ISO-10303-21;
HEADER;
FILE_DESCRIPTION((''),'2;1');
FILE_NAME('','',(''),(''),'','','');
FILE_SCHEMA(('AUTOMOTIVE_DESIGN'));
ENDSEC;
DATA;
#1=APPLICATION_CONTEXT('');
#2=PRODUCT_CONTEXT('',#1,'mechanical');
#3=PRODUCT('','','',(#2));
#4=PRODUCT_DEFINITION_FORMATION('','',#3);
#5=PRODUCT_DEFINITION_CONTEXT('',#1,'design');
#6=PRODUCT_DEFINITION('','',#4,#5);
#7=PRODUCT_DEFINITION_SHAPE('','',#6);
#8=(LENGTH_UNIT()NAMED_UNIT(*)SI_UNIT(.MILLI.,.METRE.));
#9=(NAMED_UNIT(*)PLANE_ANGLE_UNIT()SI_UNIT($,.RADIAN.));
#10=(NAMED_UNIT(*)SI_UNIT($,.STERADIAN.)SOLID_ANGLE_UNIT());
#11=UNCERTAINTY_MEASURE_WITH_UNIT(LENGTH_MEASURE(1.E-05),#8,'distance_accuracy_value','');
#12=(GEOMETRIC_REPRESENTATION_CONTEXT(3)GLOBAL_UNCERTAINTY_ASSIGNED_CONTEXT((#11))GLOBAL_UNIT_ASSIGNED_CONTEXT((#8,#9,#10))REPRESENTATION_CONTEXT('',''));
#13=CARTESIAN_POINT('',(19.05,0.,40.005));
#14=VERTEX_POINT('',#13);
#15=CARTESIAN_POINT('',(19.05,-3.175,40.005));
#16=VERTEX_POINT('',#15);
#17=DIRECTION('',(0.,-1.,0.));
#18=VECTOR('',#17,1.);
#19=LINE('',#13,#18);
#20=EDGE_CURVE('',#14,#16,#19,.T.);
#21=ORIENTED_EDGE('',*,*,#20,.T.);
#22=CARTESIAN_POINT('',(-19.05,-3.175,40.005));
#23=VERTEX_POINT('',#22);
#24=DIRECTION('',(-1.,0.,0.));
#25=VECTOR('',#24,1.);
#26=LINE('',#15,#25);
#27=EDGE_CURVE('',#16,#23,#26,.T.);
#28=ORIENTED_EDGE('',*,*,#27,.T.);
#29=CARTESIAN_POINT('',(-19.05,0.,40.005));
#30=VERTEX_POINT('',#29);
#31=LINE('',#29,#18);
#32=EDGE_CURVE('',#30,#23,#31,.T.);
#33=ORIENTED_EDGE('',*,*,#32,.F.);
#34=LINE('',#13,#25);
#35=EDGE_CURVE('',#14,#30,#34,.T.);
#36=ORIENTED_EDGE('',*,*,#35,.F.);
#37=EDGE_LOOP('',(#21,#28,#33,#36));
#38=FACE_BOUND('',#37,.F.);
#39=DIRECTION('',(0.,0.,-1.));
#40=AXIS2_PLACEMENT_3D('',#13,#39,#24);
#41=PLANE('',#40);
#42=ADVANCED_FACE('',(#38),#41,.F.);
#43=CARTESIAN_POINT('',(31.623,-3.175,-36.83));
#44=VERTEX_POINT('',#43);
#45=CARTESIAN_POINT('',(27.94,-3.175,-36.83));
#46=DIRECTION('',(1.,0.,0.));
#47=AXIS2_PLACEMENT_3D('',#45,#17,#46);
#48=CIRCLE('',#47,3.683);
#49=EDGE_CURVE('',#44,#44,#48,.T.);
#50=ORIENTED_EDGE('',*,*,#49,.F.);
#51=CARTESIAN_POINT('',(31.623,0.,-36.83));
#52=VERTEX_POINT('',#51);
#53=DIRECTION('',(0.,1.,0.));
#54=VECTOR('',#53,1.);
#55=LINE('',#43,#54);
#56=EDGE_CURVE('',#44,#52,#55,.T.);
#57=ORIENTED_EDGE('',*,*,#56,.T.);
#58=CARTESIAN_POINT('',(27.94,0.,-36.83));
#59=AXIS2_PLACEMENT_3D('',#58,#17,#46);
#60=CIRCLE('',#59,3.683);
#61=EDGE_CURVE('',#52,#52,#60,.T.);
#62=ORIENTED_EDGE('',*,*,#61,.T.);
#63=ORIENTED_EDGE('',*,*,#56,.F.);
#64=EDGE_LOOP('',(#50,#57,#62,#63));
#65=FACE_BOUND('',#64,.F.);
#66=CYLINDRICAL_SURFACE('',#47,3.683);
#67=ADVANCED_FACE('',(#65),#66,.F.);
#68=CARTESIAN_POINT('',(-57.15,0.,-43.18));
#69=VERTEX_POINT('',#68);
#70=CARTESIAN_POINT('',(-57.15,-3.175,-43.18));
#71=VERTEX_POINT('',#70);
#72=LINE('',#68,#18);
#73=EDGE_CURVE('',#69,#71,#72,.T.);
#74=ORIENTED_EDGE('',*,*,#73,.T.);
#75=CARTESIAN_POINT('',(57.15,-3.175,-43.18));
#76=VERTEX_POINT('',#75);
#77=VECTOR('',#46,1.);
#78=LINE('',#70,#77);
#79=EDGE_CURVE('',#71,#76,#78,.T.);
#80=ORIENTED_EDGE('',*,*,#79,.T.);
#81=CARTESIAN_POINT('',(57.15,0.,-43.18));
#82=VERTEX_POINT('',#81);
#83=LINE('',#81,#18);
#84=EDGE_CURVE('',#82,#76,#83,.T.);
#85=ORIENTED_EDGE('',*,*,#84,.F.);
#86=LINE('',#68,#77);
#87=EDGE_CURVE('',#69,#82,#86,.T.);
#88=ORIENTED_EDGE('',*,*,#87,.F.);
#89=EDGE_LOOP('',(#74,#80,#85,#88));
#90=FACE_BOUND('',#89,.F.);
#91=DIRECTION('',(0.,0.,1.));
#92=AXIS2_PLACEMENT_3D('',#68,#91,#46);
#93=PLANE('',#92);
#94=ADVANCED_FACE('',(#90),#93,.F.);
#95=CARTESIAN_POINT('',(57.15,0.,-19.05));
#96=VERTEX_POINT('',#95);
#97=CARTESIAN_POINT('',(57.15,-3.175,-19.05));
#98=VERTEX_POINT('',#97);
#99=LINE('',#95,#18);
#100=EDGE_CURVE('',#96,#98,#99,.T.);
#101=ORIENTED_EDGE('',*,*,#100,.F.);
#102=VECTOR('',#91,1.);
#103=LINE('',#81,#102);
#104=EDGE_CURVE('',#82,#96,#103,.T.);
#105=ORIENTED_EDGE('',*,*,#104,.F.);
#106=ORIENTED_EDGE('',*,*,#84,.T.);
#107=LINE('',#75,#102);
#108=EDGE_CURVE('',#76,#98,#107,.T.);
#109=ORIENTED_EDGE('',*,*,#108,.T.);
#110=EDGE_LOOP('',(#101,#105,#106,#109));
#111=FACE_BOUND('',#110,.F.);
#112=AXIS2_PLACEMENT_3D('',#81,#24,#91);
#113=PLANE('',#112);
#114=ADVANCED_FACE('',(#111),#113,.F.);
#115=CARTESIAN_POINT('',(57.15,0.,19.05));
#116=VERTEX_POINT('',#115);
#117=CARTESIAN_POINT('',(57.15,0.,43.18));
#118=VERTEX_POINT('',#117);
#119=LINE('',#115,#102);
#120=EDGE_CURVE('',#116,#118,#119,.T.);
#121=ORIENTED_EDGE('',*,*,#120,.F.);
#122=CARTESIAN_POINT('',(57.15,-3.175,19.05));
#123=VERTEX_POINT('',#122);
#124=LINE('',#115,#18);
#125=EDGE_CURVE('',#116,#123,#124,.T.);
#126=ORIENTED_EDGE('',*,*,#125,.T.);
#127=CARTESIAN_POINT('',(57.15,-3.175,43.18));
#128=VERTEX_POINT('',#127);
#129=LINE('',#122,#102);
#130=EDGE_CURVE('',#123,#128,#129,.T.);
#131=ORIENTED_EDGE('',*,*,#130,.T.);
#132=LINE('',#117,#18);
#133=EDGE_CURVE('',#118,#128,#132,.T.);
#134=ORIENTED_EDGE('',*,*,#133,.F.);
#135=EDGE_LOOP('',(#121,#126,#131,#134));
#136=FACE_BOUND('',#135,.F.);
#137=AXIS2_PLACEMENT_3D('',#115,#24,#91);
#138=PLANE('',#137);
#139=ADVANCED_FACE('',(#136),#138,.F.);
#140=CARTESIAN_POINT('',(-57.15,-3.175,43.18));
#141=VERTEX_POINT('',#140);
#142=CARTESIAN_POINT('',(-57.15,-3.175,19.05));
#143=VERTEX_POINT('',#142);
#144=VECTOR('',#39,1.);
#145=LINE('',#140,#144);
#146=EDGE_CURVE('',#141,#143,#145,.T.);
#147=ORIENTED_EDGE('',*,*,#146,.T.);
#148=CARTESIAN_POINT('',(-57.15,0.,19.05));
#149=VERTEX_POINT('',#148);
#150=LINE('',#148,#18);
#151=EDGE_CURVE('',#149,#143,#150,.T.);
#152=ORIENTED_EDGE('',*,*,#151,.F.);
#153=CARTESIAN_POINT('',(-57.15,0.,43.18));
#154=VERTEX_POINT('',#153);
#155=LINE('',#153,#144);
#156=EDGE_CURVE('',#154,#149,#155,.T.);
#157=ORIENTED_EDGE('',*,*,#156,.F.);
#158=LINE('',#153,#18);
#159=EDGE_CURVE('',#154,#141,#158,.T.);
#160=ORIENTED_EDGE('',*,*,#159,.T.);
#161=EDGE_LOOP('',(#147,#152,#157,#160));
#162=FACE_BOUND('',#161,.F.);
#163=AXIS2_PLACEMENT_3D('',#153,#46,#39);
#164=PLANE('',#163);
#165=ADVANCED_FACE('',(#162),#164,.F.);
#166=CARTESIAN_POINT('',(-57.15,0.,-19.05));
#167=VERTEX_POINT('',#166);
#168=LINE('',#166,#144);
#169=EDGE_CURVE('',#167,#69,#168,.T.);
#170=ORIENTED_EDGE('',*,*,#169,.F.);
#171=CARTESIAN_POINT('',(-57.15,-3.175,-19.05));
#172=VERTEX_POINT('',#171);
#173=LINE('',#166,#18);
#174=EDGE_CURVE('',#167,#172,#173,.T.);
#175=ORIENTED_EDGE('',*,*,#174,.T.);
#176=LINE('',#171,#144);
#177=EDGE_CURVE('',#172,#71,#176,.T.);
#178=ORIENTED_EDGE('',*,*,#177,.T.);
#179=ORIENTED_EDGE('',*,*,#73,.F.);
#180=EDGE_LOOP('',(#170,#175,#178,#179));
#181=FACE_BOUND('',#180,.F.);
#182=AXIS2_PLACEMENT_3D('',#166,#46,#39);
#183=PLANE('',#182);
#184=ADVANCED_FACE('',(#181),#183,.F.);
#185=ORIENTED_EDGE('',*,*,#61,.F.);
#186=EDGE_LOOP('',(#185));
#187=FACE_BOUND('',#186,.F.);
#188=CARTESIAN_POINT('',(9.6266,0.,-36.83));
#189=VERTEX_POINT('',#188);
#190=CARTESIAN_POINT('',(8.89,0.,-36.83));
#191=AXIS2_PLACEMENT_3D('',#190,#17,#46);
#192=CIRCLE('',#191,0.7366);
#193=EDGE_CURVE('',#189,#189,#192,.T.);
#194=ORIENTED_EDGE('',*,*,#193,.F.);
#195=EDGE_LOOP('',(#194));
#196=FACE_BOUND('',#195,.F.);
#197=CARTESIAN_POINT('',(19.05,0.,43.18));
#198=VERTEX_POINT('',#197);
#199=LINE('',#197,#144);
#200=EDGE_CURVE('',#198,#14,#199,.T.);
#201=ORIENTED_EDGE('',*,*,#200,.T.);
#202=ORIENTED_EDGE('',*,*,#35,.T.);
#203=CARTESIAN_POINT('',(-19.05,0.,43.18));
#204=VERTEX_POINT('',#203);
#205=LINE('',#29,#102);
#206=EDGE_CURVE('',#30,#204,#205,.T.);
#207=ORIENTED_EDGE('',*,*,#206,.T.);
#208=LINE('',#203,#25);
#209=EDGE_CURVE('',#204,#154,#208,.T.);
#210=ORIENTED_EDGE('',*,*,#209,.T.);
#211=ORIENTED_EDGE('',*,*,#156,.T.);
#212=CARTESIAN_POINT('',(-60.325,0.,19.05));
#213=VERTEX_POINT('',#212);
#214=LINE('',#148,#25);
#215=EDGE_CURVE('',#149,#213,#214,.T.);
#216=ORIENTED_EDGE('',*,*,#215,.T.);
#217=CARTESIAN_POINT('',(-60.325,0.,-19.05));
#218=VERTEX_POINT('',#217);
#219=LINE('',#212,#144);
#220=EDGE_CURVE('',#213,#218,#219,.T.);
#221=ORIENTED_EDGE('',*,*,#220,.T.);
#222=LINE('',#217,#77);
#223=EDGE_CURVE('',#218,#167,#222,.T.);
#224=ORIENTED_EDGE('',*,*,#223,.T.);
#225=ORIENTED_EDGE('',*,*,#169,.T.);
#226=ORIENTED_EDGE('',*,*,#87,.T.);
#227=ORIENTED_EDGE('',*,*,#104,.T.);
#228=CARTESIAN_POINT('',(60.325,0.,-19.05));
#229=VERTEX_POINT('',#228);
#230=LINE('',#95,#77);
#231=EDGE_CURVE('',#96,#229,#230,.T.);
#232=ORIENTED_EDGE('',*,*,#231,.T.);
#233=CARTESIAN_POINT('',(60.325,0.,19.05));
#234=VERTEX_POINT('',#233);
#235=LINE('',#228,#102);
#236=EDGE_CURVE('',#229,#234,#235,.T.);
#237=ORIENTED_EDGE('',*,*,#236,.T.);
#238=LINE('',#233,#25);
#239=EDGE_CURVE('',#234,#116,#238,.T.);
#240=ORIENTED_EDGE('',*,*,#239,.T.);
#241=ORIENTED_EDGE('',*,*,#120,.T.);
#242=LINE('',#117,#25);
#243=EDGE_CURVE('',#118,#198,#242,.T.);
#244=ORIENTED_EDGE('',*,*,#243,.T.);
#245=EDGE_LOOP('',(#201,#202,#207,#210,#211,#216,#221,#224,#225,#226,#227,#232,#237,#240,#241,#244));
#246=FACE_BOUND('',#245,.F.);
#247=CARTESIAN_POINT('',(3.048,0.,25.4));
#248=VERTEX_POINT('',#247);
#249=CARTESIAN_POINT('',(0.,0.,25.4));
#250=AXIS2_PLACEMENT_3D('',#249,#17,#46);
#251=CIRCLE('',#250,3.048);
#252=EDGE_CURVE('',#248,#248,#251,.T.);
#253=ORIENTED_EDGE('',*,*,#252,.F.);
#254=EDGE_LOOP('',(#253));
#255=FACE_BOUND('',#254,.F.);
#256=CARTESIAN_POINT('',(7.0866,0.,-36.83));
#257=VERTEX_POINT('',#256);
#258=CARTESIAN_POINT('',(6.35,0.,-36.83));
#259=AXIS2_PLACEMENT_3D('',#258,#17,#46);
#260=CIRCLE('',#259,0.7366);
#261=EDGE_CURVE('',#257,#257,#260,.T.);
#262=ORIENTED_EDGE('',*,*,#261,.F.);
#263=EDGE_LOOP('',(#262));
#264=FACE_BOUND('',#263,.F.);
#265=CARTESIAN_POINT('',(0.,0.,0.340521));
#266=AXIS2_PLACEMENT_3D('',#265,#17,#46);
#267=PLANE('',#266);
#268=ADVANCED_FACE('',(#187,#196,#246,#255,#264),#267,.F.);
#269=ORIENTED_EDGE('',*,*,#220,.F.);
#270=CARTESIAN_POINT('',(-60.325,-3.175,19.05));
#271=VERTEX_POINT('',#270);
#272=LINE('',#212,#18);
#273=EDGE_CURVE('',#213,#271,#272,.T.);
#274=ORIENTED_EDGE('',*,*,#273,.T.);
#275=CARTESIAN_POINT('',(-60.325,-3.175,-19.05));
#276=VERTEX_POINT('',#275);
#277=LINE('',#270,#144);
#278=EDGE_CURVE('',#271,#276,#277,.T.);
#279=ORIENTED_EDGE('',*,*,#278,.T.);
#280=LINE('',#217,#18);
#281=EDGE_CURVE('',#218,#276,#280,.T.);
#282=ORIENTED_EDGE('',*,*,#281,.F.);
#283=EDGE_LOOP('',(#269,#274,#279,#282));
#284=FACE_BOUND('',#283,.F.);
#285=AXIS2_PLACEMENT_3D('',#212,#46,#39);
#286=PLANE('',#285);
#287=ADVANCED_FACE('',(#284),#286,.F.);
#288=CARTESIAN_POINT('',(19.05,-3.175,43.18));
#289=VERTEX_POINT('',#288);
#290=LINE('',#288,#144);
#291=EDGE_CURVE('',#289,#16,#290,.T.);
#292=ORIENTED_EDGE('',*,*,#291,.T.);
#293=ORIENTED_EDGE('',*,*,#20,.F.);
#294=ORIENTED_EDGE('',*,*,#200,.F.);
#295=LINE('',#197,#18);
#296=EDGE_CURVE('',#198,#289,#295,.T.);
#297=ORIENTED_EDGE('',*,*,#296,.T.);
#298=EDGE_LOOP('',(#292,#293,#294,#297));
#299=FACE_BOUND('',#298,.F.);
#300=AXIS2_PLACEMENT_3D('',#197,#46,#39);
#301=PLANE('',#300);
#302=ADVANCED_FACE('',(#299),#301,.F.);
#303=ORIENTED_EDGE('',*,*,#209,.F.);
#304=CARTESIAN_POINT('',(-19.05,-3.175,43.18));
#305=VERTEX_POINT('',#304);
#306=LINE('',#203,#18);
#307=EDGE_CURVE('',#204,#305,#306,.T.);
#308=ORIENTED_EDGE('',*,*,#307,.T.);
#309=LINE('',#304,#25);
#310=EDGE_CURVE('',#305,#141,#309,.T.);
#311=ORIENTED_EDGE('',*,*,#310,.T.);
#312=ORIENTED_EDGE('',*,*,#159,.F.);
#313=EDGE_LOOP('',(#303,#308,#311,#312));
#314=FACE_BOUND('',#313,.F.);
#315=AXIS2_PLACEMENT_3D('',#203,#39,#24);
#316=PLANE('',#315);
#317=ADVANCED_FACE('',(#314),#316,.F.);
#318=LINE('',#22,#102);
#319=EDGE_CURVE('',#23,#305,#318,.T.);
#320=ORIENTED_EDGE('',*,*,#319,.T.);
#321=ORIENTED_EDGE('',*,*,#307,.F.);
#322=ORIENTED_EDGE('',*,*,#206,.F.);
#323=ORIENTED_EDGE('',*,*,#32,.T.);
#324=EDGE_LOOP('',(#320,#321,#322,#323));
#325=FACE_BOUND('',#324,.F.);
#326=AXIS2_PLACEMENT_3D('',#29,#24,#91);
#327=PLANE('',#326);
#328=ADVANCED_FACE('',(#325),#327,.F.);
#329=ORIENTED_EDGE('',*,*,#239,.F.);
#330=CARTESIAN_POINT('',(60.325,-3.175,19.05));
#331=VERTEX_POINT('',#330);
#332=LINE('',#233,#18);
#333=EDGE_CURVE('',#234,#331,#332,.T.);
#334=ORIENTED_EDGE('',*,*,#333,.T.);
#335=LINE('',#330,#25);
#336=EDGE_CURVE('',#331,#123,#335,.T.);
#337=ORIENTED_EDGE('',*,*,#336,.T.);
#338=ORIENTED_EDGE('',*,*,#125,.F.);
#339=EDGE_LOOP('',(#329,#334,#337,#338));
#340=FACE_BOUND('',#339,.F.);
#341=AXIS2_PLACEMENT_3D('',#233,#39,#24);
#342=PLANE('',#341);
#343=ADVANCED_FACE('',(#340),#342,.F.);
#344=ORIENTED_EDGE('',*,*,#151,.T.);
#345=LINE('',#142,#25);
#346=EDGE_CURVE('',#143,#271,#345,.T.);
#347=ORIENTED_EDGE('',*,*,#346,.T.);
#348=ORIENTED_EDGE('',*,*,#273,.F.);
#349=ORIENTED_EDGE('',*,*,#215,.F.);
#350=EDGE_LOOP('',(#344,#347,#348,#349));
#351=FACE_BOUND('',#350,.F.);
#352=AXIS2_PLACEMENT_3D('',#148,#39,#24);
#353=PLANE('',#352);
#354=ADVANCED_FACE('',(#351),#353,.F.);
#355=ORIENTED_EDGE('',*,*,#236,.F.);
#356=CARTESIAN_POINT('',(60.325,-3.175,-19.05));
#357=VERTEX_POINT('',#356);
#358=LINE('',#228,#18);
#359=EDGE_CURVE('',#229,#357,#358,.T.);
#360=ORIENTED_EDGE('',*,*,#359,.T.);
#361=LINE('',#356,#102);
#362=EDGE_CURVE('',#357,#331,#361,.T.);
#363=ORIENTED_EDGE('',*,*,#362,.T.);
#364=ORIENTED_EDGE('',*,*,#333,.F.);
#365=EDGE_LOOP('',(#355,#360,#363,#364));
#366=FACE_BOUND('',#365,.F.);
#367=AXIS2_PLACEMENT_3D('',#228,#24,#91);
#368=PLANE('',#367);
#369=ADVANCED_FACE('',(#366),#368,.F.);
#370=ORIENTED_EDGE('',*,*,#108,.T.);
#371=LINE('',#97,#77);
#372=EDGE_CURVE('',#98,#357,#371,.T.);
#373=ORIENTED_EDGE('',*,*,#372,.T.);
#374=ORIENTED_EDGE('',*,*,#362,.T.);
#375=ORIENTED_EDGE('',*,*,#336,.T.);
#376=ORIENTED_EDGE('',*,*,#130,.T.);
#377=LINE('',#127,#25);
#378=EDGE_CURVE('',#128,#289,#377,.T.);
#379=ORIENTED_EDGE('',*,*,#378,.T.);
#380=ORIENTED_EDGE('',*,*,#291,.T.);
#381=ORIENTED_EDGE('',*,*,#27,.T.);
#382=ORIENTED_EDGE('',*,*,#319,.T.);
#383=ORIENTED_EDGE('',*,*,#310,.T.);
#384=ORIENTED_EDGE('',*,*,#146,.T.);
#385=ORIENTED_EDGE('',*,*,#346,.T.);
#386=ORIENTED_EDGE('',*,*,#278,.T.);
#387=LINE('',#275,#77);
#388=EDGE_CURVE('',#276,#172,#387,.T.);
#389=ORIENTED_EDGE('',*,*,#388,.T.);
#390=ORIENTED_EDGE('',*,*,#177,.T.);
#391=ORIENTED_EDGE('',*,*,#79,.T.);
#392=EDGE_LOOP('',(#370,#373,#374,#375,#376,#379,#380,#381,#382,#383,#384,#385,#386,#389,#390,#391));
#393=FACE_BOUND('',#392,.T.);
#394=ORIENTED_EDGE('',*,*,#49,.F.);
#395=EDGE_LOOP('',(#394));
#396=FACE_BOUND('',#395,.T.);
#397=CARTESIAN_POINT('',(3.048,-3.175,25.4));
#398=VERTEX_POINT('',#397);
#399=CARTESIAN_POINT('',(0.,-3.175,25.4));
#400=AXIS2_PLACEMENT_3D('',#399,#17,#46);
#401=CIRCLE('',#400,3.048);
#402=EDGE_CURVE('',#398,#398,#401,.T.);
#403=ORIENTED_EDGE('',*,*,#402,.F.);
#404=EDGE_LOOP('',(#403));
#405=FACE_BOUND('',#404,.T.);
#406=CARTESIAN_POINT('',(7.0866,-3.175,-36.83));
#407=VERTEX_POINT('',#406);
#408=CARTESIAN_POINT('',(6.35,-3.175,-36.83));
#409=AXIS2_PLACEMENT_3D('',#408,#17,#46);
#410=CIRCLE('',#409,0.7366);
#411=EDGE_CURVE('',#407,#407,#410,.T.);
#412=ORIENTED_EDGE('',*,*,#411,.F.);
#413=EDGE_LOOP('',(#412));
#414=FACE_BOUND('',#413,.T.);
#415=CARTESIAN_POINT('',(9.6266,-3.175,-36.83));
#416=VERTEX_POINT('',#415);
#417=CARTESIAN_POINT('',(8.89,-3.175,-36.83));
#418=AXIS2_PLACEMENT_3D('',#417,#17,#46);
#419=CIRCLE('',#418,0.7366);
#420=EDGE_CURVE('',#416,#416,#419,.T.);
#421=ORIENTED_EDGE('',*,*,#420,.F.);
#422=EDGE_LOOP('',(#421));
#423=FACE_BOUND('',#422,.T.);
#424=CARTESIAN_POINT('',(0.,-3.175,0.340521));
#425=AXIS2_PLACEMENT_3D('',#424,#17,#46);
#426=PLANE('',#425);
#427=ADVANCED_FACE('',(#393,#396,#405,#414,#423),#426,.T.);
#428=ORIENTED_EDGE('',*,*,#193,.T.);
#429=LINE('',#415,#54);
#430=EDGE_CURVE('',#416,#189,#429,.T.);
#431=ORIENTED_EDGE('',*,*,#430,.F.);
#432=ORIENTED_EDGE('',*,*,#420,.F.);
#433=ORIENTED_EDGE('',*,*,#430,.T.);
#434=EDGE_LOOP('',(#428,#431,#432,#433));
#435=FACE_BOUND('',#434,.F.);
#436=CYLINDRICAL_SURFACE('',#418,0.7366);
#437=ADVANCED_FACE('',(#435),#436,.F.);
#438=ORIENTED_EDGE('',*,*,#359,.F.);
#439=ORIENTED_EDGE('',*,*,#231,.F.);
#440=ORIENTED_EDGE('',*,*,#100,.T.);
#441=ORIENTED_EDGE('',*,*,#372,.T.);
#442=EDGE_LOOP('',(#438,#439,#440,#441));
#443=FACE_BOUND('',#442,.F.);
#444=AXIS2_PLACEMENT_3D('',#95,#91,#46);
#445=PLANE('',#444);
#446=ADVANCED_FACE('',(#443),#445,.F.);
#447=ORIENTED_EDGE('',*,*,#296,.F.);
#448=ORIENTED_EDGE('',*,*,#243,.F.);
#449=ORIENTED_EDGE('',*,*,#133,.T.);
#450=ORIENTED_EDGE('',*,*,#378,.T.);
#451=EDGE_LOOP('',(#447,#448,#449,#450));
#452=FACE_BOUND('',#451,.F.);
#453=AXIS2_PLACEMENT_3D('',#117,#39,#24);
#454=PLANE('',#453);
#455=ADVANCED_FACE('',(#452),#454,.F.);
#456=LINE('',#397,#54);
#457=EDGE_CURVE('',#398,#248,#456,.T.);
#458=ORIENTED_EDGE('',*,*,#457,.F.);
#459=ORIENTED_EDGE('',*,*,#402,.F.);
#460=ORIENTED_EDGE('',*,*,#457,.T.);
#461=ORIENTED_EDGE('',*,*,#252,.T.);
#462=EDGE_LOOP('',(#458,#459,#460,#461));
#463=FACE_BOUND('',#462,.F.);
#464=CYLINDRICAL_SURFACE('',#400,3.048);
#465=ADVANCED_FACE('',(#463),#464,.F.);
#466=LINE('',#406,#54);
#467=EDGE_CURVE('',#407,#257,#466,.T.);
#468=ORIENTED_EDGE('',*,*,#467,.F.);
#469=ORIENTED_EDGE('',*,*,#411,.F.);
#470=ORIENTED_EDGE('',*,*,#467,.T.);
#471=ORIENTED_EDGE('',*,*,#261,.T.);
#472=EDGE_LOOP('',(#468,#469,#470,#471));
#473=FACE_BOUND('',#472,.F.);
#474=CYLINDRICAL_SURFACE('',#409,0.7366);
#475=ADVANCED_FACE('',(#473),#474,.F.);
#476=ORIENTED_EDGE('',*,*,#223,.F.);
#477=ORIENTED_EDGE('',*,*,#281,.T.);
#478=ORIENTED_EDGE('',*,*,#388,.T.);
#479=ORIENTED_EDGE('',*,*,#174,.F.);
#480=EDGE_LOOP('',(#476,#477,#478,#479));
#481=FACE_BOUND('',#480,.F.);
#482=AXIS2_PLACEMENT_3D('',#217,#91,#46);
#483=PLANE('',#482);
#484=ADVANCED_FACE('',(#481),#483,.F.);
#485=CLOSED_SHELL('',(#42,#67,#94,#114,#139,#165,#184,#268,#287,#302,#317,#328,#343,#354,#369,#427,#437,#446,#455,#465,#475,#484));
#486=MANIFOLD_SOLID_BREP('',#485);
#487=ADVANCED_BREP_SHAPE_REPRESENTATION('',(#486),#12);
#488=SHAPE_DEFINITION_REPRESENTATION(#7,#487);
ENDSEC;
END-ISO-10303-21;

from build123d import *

# Parameters (mm, degrees)
F1_DEPTH = 3.175
F2_R     = 3.048
F2_R_2   = 3.683
F2_R_3   = 0.7366
F3_DEPTH = 3.176


# Not quite as in the source:
# - a feature names something its author has since deleted; it is built from what else it names


with BuildPart() as f1:
    # F0 (on Front) → F1 (new body)
    with BuildSketch(Plane.XZ):
        Polygon((-57.15, -43.18), (57.15, -43.18), (57.15, -19.05), (60.325, -19.05), (60.325, 19.05), (57.15, 19.05), (57.15, 43.18), (19.05, 43.18), (19.05, 40.005), (-19.05, 40.005), (-19.05, 43.18), (-57.15, 43.18), (-57.15, 19.05), (-60.325, 19.05), (-60.325, 0), (-60.325, -19.05), (-57.15, -19.05), align=None)
    extrude(amount=F1_DEPTH)

    # F2 (on face) → F3 (cut, through all)
    with BuildSketch(Plane.XZ.offset(3.175)):
        with Locations((0, 25.4)):
            Circle(F2_R)
        with Locations((27.94, -36.83)):
            Circle(F2_R_2)
        with Locations((6.35, -36.83)):
            Circle(F2_R_3)
        with Locations((8.89, -36.83)):
            Circle(F2_R_3)
    extrude(amount=-F3_DEPTH, mode=Mode.SUBTRACT)


solid = f1.part
